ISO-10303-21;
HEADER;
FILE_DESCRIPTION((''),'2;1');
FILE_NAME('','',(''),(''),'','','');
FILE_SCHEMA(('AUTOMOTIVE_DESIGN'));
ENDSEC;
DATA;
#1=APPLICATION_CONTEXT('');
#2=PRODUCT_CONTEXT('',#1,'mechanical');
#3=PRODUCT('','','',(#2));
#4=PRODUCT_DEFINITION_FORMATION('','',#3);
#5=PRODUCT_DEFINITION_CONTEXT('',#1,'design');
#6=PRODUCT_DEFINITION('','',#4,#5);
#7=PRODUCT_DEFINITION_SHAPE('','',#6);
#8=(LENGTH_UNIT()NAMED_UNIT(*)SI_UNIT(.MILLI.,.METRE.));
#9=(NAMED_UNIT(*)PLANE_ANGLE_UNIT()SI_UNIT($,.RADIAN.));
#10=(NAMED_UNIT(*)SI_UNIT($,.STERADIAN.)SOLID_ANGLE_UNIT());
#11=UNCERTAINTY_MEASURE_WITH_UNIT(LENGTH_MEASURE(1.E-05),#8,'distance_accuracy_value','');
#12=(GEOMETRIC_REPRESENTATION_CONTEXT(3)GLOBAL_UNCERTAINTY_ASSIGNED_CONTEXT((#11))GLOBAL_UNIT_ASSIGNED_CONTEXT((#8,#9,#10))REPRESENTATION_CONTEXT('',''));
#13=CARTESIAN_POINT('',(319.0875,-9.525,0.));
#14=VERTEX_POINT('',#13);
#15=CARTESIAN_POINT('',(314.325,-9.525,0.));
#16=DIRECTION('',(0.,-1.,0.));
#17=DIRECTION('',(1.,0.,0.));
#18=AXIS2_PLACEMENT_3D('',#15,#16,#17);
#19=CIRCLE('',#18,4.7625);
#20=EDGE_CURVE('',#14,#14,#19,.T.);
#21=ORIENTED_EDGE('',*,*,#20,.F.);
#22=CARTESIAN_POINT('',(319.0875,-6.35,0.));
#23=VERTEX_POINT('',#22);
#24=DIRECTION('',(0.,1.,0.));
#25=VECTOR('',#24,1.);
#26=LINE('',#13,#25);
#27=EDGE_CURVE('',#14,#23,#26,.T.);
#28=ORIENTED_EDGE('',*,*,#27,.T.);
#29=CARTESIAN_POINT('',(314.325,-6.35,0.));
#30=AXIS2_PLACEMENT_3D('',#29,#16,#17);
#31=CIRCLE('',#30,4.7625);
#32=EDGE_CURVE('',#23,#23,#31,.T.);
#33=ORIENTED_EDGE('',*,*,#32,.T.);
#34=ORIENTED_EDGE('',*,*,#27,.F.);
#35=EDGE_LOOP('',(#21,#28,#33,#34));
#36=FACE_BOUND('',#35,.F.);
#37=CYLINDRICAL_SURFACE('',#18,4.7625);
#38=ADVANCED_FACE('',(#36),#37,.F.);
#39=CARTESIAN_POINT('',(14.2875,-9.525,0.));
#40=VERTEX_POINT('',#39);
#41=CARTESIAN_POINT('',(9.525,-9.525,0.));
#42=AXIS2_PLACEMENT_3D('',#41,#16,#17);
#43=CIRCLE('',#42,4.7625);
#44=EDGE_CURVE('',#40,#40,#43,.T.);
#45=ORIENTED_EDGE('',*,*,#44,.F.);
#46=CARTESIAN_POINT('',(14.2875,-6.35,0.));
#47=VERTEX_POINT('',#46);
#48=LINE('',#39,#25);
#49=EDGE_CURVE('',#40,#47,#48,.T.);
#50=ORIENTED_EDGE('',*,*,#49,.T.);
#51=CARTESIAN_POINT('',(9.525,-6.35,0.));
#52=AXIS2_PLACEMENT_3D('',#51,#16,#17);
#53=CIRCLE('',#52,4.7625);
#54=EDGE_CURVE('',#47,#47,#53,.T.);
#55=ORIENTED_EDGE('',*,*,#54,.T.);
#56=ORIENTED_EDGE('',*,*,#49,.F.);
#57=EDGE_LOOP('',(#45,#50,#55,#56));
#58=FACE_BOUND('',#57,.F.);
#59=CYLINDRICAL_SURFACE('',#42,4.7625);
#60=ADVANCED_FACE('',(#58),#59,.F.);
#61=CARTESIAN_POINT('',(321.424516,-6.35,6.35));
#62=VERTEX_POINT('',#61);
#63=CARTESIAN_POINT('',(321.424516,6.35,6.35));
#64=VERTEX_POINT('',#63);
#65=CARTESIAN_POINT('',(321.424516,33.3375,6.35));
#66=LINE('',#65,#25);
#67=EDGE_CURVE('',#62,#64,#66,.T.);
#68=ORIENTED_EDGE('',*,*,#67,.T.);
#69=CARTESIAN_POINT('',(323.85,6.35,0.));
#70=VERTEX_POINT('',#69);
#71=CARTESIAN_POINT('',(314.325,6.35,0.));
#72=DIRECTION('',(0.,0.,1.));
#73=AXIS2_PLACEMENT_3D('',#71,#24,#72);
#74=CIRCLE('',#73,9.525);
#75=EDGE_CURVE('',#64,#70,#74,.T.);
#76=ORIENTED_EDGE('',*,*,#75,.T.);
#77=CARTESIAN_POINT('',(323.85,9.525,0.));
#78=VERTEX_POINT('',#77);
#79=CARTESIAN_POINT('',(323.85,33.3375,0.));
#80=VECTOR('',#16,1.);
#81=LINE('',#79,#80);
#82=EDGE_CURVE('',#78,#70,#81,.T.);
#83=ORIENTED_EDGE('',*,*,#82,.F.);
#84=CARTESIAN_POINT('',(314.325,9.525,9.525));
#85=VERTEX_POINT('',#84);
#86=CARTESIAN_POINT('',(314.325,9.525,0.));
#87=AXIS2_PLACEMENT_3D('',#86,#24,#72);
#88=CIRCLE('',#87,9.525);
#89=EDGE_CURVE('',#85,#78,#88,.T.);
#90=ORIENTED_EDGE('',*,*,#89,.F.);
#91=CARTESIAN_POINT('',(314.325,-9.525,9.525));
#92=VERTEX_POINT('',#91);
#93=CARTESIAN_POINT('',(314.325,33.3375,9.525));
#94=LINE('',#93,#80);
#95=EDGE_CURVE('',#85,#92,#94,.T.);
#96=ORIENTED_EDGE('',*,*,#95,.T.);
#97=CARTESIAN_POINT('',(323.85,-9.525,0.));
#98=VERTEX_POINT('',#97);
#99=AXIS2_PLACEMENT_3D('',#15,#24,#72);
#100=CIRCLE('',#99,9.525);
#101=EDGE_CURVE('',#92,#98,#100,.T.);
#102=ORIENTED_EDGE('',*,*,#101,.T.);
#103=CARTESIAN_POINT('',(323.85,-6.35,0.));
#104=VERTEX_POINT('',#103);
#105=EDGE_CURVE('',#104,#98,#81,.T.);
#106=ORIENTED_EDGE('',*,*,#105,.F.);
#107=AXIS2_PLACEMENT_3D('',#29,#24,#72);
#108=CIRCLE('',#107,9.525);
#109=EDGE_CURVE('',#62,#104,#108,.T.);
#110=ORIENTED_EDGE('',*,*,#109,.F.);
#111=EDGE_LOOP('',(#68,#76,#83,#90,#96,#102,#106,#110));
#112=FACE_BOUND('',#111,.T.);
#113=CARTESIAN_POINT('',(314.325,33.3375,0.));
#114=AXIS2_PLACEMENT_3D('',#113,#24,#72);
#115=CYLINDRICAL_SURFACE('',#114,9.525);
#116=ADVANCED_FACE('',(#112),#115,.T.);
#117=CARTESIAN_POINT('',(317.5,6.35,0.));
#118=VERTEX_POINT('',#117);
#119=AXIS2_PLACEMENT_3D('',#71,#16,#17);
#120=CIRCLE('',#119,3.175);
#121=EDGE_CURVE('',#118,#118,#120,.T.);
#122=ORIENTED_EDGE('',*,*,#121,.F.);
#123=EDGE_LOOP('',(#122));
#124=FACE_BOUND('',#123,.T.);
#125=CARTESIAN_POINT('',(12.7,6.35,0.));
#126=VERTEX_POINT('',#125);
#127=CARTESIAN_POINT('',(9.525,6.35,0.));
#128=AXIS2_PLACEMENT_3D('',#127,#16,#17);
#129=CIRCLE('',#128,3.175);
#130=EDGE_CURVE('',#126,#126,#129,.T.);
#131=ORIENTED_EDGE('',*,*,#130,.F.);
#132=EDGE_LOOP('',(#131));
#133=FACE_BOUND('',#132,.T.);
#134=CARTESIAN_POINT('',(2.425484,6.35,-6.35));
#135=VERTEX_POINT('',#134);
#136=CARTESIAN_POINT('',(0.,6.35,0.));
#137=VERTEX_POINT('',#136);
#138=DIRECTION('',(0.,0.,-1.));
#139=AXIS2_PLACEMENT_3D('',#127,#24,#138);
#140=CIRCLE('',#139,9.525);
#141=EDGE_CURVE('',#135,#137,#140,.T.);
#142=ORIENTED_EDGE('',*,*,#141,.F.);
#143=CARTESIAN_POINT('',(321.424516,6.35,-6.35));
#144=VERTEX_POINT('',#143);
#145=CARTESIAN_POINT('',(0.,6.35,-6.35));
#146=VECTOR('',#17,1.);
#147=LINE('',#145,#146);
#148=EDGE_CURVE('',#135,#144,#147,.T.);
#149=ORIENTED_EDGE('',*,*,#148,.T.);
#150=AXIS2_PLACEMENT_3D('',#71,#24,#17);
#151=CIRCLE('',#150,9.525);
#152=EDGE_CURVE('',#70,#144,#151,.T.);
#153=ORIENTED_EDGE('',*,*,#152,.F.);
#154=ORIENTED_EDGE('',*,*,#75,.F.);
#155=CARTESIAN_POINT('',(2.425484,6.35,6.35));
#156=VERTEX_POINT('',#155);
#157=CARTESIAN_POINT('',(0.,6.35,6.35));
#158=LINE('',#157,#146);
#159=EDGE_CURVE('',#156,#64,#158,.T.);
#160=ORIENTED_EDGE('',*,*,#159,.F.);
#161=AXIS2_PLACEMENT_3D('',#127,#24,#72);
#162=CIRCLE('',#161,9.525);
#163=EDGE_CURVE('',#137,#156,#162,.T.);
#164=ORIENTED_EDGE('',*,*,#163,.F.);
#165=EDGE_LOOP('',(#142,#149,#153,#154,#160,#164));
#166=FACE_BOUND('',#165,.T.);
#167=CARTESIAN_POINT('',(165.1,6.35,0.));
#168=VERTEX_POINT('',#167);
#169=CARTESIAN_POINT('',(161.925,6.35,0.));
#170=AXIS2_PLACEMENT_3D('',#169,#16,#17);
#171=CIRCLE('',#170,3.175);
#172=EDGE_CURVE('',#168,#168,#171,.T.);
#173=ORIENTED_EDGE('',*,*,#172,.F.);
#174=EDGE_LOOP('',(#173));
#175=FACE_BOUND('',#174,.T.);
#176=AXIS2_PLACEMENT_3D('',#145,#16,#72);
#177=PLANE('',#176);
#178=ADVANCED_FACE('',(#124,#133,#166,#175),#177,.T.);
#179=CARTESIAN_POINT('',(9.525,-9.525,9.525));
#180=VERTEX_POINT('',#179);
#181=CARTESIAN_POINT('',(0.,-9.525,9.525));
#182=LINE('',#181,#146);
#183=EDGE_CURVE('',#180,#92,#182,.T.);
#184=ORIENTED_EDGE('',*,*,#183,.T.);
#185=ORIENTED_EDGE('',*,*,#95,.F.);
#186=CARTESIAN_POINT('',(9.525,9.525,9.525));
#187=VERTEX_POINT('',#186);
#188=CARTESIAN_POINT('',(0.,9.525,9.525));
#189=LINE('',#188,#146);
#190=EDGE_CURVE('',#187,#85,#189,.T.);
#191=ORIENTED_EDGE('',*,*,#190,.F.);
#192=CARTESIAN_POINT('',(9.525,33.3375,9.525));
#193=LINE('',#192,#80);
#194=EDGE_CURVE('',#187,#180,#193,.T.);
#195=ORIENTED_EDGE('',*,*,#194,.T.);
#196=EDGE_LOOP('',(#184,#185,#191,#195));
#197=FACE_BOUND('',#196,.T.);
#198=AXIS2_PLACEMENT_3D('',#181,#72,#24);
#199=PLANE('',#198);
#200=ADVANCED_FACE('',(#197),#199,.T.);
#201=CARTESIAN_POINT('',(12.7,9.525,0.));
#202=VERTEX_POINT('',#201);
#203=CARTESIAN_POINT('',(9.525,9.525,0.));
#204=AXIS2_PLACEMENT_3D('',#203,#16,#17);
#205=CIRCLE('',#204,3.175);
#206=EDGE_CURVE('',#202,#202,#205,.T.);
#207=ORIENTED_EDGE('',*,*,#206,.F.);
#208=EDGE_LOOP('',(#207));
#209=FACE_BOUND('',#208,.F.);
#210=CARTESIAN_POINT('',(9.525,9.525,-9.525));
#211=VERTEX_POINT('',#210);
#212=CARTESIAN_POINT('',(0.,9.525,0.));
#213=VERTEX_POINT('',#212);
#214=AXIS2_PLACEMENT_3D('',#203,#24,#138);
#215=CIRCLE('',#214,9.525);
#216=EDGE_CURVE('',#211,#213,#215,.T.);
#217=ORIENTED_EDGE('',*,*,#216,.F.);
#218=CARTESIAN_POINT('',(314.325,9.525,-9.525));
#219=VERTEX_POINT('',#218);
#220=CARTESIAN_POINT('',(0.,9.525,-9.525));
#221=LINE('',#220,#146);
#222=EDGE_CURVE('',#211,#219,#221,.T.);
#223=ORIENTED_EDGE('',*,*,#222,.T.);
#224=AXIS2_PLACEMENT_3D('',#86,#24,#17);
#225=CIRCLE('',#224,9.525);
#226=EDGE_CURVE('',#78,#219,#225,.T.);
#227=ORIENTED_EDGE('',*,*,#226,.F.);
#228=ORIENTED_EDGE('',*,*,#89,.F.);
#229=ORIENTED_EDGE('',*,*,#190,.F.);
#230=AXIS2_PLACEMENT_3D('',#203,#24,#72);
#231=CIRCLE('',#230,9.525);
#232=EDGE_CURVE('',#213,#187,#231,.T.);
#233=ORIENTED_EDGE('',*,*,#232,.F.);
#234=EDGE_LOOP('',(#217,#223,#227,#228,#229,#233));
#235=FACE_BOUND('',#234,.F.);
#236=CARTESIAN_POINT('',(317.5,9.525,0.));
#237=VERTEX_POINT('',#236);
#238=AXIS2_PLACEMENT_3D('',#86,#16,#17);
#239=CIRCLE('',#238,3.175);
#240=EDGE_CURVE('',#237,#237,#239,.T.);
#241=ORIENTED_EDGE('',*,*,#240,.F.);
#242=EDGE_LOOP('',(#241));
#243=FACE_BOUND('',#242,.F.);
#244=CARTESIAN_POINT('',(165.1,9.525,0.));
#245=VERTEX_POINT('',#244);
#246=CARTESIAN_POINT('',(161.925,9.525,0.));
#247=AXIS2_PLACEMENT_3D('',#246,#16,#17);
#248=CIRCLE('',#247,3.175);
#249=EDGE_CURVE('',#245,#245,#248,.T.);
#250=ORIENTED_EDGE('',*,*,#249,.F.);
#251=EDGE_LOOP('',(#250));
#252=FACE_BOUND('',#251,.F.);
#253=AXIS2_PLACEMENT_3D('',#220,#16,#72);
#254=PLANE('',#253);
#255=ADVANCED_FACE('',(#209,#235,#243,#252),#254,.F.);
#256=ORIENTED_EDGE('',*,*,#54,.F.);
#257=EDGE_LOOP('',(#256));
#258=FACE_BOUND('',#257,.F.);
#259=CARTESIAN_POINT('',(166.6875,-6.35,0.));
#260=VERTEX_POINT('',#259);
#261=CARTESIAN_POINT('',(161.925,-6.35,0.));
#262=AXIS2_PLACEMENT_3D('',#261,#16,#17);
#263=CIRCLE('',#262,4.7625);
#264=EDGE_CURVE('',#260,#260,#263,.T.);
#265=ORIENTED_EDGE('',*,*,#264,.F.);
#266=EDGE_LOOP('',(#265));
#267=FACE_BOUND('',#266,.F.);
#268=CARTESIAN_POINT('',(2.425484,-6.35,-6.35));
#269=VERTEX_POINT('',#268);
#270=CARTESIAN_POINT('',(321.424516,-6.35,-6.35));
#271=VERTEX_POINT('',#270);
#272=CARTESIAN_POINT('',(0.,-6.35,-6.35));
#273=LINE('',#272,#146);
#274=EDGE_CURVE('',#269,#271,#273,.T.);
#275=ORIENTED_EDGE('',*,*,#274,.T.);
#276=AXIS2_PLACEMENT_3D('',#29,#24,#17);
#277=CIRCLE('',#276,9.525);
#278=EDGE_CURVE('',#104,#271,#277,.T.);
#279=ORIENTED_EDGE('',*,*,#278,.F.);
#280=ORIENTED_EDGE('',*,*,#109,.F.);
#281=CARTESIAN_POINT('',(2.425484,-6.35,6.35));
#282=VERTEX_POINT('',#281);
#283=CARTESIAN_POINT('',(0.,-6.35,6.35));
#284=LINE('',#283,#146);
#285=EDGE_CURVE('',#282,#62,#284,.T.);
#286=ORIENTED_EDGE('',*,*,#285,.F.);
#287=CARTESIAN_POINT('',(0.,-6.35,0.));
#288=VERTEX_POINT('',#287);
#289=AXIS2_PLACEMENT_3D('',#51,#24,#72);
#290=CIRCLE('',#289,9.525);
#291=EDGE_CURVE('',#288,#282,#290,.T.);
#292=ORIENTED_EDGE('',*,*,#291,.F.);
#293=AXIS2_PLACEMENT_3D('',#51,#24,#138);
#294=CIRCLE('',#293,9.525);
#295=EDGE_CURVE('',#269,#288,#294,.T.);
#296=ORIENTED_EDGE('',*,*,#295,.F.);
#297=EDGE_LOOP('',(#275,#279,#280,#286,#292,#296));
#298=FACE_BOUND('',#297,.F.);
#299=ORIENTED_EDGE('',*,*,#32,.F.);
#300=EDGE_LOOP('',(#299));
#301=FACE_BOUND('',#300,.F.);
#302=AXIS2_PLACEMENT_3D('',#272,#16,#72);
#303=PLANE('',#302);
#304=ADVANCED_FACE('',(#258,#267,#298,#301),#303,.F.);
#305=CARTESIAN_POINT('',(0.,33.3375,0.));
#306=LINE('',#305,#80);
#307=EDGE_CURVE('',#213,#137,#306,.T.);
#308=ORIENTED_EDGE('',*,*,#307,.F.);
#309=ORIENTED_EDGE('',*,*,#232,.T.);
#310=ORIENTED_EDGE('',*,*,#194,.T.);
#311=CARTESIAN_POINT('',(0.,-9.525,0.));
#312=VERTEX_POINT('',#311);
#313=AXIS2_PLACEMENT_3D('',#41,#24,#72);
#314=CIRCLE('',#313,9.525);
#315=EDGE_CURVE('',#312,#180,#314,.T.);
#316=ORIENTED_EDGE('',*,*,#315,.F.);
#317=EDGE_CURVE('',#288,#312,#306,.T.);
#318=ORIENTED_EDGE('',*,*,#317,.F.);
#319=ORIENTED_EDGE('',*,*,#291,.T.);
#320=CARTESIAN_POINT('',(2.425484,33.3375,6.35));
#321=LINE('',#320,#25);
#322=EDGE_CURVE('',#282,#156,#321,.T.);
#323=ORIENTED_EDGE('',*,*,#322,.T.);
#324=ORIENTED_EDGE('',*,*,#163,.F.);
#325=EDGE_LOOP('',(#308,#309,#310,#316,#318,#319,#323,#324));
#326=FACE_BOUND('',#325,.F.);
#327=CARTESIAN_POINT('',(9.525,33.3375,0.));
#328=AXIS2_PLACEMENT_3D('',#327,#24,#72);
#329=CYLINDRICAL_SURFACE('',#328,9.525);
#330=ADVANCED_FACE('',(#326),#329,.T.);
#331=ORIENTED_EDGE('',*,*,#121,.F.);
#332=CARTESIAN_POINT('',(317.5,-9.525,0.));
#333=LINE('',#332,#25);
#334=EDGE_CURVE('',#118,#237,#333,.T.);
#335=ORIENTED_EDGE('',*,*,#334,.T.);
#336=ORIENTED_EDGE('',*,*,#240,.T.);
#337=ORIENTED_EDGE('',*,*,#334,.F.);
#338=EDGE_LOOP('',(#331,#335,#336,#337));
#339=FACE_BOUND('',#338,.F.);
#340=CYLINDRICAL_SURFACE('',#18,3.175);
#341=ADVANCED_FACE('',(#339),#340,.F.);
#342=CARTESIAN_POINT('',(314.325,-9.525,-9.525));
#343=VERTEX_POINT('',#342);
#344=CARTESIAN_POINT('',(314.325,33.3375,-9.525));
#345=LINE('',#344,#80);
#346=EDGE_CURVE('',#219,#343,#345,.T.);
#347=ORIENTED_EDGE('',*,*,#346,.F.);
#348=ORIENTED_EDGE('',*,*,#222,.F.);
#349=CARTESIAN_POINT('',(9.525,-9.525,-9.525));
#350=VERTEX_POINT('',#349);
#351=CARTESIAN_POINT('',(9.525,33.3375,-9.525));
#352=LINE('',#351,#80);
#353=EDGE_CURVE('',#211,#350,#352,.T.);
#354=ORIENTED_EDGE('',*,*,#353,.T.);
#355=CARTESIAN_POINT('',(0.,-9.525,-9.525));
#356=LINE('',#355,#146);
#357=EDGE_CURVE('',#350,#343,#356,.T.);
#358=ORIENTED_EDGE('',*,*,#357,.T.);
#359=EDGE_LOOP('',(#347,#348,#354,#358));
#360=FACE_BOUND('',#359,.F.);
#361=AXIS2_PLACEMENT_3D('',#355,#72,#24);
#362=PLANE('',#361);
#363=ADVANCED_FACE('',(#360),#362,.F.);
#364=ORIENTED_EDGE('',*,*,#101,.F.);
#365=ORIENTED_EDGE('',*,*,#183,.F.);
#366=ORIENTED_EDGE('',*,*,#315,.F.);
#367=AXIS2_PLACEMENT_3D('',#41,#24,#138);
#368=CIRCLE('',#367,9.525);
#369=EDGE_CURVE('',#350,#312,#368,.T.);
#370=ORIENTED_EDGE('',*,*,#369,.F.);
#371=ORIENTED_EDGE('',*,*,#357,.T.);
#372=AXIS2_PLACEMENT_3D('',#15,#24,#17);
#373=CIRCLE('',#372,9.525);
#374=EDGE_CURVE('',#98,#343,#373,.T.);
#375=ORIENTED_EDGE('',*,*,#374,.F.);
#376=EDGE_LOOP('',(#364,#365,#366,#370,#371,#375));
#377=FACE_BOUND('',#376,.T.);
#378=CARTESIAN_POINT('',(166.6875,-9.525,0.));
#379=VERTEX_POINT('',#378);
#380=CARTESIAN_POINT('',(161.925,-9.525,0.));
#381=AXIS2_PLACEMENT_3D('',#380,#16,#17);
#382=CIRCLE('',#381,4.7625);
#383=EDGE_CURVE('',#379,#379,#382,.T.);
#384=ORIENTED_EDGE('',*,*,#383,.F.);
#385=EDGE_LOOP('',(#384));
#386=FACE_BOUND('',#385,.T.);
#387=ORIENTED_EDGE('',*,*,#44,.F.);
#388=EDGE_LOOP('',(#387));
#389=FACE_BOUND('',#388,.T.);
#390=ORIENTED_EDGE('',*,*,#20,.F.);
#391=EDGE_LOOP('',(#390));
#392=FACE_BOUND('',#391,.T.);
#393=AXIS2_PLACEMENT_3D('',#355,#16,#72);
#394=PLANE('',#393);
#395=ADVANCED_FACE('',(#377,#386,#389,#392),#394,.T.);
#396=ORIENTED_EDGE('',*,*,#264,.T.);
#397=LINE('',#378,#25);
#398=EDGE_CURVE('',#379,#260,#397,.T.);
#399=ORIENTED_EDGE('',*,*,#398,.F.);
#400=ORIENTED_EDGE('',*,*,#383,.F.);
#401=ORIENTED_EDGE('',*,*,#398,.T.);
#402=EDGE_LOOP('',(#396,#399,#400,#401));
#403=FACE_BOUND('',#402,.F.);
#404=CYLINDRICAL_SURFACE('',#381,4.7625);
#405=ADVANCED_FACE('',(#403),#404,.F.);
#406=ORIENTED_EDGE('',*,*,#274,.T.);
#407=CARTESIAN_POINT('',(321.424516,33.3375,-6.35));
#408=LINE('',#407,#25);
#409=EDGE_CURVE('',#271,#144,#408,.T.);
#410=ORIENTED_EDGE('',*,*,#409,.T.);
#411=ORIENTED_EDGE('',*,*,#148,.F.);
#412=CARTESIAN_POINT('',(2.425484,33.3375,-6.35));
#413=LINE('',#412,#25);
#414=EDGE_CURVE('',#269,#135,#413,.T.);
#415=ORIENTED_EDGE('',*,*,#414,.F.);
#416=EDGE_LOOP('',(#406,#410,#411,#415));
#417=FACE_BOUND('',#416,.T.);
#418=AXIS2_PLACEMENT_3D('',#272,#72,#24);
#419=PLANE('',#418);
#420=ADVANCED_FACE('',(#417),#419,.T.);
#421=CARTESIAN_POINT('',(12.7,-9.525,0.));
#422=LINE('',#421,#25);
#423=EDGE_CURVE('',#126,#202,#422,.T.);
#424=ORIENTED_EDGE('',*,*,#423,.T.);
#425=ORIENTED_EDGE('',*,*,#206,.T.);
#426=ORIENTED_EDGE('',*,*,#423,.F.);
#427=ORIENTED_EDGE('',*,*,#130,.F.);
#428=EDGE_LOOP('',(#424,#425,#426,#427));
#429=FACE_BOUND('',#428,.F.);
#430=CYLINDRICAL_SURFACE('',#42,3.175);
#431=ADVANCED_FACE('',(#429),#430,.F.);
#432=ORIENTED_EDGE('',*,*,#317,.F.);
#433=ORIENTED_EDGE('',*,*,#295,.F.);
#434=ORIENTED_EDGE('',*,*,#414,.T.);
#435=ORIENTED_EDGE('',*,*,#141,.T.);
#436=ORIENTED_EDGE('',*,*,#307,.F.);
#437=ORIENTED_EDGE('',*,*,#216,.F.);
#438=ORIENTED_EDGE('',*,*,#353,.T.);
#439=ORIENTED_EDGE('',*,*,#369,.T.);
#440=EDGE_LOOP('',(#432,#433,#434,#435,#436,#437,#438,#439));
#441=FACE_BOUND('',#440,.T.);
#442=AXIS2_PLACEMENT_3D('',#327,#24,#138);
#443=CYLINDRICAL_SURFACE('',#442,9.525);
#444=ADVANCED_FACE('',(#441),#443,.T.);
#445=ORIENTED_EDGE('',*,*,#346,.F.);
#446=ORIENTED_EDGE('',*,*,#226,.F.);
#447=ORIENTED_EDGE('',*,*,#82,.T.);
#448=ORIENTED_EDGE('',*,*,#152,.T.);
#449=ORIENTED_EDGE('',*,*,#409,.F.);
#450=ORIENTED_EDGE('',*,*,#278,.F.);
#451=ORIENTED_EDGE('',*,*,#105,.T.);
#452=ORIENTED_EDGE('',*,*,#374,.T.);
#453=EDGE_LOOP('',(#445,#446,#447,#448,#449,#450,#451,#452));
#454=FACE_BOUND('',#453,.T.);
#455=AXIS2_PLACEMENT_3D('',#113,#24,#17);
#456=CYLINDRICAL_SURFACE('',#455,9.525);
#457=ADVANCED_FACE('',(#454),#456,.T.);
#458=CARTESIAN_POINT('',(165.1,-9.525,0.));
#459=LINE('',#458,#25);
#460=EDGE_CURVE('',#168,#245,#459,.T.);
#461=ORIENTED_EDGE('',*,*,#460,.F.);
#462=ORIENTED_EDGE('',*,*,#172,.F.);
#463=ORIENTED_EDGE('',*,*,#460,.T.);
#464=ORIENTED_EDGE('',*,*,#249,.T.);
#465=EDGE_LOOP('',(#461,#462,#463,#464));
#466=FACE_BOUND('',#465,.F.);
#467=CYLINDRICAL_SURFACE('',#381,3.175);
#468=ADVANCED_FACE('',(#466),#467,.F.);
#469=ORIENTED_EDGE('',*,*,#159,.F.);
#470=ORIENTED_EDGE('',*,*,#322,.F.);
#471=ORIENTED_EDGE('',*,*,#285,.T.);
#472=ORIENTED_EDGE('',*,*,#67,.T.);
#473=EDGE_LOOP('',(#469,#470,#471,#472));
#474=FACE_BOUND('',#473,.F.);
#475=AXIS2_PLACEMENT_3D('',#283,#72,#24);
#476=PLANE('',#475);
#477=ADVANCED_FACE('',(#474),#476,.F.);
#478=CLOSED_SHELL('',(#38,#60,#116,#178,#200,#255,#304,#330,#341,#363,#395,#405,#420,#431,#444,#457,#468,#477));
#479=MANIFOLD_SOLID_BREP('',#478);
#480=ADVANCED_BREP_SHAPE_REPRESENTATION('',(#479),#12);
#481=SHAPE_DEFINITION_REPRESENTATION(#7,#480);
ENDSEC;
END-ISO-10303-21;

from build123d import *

# Parameters (mm, degrees)
F0_W        = 19.05
F0_H        = 19.05
F0_W_2      = 12.7
F0_H_2      = 12.7
F1_DEPTH    = 323.85
F3_T1_DEPTH = 66.675
F4_T1_DEPTH = 66.675
F2_R        = 3.175
F5_DEPTH    = 19.051
F2_R_2      = 4.7625
F6_DEPTH    = 3.175


# Not quite as in the source:
# - a fillet or chamfer that OpenCascade refuses, or shapes differently, is made with other operations: its cross-section is extruded or revolved along the edge and cut away or added


with BuildPart() as f1:
    # F0 (on Right) → F1 (new body)
    with BuildSketch(Plane.YZ):
        Rectangle(F0_W, F0_H)
        Rectangle(F0_W_2, F0_H_2, mode=Mode.SUBTRACT)
    extrude(amount=F1_DEPTH)

    # F3: fillet of radius 9.525 on 2 edges, made by hand

    # F3_s2 → F3_t1 (cut)
    with BuildSketch(Plane.XZ.offset(-33.3375)):
        with BuildLine():
            ThreePointArc((9.525, 9.525), (2.7898079092, 6.7351920908), (0, 0))
            Line((0, 0), (0, 9.525))
            Line((0, 9.525), (9.525, 9.525))
        make_face()
        with BuildLine():
            ThreePointArc((9.525, -9.525), (2.7898079092, -6.7351920908), (0, 0))
            Line((0, 0), (0, -9.525))
            Line((0, -9.525), (9.525, -9.525))
        make_face()
    extrude(amount=F3_T1_DEPTH, mode=Mode.SUBTRACT)

    # F4: fillet of radius 9.525 on 2 edges, made by hand

    # F4_s2 → F4_t1 (cut)
    with BuildSketch(Plane.XZ.offset(-33.3375)):
        with BuildLine():
            ThreePointArc((314.325, 9.525), (321.0601920908, 6.7351920908), (323.85, 0))
            Line((323.85, 0), (323.85, 9.525))
            Line((323.85, 9.525), (314.325, 9.525))
        make_face()
        with BuildLine():
            ThreePointArc((323.85, 0), (321.0601920908, -6.7351920908), (314.325, -9.525))
            Line((314.325, -9.525), (323.85, -9.525))
            Line((323.85, -9.525), (323.85, 0))
        make_face()
    extrude(amount=F4_T1_DEPTH, mode=Mode.SUBTRACT)

    # F2 (on face) → F5 (cut, through all)
    with BuildSketch(Plane.XZ.offset(9.525)):
        with Locations((314.325, 0)):
            Circle(F2_R)
        with Locations((161.925, 0)):
            Circle(F2_R)
        with Locations((9.525, 0)):
            Circle(F2_R)
    extrude(amount=-F5_DEPTH, mode=Mode.SUBTRACT)

    # F2 (on face) → F6 (cut, through all)
    with BuildSketch(Plane.XZ.offset(9.525)):
        with Locations((9.525, 0)):
            Circle(F2_R_2)
        with Locations((9.525, 0)):
            Circle(F2_R, mode=Mode.SUBTRACT)
        with Locations((161.925, 0)):
            Circle(F2_R_2)
        with Locations((161.925, 0)):
            Circle(F2_R, mode=Mode.SUBTRACT)
        with Locations((314.325, 0)):
            Circle(F2_R_2)
        with Locations((314.325, 0)):
            Circle(F2_R, mode=Mode.SUBTRACT)
    extrude(amount=-F6_DEPTH, mode=Mode.SUBTRACT)


solid = f1.part
